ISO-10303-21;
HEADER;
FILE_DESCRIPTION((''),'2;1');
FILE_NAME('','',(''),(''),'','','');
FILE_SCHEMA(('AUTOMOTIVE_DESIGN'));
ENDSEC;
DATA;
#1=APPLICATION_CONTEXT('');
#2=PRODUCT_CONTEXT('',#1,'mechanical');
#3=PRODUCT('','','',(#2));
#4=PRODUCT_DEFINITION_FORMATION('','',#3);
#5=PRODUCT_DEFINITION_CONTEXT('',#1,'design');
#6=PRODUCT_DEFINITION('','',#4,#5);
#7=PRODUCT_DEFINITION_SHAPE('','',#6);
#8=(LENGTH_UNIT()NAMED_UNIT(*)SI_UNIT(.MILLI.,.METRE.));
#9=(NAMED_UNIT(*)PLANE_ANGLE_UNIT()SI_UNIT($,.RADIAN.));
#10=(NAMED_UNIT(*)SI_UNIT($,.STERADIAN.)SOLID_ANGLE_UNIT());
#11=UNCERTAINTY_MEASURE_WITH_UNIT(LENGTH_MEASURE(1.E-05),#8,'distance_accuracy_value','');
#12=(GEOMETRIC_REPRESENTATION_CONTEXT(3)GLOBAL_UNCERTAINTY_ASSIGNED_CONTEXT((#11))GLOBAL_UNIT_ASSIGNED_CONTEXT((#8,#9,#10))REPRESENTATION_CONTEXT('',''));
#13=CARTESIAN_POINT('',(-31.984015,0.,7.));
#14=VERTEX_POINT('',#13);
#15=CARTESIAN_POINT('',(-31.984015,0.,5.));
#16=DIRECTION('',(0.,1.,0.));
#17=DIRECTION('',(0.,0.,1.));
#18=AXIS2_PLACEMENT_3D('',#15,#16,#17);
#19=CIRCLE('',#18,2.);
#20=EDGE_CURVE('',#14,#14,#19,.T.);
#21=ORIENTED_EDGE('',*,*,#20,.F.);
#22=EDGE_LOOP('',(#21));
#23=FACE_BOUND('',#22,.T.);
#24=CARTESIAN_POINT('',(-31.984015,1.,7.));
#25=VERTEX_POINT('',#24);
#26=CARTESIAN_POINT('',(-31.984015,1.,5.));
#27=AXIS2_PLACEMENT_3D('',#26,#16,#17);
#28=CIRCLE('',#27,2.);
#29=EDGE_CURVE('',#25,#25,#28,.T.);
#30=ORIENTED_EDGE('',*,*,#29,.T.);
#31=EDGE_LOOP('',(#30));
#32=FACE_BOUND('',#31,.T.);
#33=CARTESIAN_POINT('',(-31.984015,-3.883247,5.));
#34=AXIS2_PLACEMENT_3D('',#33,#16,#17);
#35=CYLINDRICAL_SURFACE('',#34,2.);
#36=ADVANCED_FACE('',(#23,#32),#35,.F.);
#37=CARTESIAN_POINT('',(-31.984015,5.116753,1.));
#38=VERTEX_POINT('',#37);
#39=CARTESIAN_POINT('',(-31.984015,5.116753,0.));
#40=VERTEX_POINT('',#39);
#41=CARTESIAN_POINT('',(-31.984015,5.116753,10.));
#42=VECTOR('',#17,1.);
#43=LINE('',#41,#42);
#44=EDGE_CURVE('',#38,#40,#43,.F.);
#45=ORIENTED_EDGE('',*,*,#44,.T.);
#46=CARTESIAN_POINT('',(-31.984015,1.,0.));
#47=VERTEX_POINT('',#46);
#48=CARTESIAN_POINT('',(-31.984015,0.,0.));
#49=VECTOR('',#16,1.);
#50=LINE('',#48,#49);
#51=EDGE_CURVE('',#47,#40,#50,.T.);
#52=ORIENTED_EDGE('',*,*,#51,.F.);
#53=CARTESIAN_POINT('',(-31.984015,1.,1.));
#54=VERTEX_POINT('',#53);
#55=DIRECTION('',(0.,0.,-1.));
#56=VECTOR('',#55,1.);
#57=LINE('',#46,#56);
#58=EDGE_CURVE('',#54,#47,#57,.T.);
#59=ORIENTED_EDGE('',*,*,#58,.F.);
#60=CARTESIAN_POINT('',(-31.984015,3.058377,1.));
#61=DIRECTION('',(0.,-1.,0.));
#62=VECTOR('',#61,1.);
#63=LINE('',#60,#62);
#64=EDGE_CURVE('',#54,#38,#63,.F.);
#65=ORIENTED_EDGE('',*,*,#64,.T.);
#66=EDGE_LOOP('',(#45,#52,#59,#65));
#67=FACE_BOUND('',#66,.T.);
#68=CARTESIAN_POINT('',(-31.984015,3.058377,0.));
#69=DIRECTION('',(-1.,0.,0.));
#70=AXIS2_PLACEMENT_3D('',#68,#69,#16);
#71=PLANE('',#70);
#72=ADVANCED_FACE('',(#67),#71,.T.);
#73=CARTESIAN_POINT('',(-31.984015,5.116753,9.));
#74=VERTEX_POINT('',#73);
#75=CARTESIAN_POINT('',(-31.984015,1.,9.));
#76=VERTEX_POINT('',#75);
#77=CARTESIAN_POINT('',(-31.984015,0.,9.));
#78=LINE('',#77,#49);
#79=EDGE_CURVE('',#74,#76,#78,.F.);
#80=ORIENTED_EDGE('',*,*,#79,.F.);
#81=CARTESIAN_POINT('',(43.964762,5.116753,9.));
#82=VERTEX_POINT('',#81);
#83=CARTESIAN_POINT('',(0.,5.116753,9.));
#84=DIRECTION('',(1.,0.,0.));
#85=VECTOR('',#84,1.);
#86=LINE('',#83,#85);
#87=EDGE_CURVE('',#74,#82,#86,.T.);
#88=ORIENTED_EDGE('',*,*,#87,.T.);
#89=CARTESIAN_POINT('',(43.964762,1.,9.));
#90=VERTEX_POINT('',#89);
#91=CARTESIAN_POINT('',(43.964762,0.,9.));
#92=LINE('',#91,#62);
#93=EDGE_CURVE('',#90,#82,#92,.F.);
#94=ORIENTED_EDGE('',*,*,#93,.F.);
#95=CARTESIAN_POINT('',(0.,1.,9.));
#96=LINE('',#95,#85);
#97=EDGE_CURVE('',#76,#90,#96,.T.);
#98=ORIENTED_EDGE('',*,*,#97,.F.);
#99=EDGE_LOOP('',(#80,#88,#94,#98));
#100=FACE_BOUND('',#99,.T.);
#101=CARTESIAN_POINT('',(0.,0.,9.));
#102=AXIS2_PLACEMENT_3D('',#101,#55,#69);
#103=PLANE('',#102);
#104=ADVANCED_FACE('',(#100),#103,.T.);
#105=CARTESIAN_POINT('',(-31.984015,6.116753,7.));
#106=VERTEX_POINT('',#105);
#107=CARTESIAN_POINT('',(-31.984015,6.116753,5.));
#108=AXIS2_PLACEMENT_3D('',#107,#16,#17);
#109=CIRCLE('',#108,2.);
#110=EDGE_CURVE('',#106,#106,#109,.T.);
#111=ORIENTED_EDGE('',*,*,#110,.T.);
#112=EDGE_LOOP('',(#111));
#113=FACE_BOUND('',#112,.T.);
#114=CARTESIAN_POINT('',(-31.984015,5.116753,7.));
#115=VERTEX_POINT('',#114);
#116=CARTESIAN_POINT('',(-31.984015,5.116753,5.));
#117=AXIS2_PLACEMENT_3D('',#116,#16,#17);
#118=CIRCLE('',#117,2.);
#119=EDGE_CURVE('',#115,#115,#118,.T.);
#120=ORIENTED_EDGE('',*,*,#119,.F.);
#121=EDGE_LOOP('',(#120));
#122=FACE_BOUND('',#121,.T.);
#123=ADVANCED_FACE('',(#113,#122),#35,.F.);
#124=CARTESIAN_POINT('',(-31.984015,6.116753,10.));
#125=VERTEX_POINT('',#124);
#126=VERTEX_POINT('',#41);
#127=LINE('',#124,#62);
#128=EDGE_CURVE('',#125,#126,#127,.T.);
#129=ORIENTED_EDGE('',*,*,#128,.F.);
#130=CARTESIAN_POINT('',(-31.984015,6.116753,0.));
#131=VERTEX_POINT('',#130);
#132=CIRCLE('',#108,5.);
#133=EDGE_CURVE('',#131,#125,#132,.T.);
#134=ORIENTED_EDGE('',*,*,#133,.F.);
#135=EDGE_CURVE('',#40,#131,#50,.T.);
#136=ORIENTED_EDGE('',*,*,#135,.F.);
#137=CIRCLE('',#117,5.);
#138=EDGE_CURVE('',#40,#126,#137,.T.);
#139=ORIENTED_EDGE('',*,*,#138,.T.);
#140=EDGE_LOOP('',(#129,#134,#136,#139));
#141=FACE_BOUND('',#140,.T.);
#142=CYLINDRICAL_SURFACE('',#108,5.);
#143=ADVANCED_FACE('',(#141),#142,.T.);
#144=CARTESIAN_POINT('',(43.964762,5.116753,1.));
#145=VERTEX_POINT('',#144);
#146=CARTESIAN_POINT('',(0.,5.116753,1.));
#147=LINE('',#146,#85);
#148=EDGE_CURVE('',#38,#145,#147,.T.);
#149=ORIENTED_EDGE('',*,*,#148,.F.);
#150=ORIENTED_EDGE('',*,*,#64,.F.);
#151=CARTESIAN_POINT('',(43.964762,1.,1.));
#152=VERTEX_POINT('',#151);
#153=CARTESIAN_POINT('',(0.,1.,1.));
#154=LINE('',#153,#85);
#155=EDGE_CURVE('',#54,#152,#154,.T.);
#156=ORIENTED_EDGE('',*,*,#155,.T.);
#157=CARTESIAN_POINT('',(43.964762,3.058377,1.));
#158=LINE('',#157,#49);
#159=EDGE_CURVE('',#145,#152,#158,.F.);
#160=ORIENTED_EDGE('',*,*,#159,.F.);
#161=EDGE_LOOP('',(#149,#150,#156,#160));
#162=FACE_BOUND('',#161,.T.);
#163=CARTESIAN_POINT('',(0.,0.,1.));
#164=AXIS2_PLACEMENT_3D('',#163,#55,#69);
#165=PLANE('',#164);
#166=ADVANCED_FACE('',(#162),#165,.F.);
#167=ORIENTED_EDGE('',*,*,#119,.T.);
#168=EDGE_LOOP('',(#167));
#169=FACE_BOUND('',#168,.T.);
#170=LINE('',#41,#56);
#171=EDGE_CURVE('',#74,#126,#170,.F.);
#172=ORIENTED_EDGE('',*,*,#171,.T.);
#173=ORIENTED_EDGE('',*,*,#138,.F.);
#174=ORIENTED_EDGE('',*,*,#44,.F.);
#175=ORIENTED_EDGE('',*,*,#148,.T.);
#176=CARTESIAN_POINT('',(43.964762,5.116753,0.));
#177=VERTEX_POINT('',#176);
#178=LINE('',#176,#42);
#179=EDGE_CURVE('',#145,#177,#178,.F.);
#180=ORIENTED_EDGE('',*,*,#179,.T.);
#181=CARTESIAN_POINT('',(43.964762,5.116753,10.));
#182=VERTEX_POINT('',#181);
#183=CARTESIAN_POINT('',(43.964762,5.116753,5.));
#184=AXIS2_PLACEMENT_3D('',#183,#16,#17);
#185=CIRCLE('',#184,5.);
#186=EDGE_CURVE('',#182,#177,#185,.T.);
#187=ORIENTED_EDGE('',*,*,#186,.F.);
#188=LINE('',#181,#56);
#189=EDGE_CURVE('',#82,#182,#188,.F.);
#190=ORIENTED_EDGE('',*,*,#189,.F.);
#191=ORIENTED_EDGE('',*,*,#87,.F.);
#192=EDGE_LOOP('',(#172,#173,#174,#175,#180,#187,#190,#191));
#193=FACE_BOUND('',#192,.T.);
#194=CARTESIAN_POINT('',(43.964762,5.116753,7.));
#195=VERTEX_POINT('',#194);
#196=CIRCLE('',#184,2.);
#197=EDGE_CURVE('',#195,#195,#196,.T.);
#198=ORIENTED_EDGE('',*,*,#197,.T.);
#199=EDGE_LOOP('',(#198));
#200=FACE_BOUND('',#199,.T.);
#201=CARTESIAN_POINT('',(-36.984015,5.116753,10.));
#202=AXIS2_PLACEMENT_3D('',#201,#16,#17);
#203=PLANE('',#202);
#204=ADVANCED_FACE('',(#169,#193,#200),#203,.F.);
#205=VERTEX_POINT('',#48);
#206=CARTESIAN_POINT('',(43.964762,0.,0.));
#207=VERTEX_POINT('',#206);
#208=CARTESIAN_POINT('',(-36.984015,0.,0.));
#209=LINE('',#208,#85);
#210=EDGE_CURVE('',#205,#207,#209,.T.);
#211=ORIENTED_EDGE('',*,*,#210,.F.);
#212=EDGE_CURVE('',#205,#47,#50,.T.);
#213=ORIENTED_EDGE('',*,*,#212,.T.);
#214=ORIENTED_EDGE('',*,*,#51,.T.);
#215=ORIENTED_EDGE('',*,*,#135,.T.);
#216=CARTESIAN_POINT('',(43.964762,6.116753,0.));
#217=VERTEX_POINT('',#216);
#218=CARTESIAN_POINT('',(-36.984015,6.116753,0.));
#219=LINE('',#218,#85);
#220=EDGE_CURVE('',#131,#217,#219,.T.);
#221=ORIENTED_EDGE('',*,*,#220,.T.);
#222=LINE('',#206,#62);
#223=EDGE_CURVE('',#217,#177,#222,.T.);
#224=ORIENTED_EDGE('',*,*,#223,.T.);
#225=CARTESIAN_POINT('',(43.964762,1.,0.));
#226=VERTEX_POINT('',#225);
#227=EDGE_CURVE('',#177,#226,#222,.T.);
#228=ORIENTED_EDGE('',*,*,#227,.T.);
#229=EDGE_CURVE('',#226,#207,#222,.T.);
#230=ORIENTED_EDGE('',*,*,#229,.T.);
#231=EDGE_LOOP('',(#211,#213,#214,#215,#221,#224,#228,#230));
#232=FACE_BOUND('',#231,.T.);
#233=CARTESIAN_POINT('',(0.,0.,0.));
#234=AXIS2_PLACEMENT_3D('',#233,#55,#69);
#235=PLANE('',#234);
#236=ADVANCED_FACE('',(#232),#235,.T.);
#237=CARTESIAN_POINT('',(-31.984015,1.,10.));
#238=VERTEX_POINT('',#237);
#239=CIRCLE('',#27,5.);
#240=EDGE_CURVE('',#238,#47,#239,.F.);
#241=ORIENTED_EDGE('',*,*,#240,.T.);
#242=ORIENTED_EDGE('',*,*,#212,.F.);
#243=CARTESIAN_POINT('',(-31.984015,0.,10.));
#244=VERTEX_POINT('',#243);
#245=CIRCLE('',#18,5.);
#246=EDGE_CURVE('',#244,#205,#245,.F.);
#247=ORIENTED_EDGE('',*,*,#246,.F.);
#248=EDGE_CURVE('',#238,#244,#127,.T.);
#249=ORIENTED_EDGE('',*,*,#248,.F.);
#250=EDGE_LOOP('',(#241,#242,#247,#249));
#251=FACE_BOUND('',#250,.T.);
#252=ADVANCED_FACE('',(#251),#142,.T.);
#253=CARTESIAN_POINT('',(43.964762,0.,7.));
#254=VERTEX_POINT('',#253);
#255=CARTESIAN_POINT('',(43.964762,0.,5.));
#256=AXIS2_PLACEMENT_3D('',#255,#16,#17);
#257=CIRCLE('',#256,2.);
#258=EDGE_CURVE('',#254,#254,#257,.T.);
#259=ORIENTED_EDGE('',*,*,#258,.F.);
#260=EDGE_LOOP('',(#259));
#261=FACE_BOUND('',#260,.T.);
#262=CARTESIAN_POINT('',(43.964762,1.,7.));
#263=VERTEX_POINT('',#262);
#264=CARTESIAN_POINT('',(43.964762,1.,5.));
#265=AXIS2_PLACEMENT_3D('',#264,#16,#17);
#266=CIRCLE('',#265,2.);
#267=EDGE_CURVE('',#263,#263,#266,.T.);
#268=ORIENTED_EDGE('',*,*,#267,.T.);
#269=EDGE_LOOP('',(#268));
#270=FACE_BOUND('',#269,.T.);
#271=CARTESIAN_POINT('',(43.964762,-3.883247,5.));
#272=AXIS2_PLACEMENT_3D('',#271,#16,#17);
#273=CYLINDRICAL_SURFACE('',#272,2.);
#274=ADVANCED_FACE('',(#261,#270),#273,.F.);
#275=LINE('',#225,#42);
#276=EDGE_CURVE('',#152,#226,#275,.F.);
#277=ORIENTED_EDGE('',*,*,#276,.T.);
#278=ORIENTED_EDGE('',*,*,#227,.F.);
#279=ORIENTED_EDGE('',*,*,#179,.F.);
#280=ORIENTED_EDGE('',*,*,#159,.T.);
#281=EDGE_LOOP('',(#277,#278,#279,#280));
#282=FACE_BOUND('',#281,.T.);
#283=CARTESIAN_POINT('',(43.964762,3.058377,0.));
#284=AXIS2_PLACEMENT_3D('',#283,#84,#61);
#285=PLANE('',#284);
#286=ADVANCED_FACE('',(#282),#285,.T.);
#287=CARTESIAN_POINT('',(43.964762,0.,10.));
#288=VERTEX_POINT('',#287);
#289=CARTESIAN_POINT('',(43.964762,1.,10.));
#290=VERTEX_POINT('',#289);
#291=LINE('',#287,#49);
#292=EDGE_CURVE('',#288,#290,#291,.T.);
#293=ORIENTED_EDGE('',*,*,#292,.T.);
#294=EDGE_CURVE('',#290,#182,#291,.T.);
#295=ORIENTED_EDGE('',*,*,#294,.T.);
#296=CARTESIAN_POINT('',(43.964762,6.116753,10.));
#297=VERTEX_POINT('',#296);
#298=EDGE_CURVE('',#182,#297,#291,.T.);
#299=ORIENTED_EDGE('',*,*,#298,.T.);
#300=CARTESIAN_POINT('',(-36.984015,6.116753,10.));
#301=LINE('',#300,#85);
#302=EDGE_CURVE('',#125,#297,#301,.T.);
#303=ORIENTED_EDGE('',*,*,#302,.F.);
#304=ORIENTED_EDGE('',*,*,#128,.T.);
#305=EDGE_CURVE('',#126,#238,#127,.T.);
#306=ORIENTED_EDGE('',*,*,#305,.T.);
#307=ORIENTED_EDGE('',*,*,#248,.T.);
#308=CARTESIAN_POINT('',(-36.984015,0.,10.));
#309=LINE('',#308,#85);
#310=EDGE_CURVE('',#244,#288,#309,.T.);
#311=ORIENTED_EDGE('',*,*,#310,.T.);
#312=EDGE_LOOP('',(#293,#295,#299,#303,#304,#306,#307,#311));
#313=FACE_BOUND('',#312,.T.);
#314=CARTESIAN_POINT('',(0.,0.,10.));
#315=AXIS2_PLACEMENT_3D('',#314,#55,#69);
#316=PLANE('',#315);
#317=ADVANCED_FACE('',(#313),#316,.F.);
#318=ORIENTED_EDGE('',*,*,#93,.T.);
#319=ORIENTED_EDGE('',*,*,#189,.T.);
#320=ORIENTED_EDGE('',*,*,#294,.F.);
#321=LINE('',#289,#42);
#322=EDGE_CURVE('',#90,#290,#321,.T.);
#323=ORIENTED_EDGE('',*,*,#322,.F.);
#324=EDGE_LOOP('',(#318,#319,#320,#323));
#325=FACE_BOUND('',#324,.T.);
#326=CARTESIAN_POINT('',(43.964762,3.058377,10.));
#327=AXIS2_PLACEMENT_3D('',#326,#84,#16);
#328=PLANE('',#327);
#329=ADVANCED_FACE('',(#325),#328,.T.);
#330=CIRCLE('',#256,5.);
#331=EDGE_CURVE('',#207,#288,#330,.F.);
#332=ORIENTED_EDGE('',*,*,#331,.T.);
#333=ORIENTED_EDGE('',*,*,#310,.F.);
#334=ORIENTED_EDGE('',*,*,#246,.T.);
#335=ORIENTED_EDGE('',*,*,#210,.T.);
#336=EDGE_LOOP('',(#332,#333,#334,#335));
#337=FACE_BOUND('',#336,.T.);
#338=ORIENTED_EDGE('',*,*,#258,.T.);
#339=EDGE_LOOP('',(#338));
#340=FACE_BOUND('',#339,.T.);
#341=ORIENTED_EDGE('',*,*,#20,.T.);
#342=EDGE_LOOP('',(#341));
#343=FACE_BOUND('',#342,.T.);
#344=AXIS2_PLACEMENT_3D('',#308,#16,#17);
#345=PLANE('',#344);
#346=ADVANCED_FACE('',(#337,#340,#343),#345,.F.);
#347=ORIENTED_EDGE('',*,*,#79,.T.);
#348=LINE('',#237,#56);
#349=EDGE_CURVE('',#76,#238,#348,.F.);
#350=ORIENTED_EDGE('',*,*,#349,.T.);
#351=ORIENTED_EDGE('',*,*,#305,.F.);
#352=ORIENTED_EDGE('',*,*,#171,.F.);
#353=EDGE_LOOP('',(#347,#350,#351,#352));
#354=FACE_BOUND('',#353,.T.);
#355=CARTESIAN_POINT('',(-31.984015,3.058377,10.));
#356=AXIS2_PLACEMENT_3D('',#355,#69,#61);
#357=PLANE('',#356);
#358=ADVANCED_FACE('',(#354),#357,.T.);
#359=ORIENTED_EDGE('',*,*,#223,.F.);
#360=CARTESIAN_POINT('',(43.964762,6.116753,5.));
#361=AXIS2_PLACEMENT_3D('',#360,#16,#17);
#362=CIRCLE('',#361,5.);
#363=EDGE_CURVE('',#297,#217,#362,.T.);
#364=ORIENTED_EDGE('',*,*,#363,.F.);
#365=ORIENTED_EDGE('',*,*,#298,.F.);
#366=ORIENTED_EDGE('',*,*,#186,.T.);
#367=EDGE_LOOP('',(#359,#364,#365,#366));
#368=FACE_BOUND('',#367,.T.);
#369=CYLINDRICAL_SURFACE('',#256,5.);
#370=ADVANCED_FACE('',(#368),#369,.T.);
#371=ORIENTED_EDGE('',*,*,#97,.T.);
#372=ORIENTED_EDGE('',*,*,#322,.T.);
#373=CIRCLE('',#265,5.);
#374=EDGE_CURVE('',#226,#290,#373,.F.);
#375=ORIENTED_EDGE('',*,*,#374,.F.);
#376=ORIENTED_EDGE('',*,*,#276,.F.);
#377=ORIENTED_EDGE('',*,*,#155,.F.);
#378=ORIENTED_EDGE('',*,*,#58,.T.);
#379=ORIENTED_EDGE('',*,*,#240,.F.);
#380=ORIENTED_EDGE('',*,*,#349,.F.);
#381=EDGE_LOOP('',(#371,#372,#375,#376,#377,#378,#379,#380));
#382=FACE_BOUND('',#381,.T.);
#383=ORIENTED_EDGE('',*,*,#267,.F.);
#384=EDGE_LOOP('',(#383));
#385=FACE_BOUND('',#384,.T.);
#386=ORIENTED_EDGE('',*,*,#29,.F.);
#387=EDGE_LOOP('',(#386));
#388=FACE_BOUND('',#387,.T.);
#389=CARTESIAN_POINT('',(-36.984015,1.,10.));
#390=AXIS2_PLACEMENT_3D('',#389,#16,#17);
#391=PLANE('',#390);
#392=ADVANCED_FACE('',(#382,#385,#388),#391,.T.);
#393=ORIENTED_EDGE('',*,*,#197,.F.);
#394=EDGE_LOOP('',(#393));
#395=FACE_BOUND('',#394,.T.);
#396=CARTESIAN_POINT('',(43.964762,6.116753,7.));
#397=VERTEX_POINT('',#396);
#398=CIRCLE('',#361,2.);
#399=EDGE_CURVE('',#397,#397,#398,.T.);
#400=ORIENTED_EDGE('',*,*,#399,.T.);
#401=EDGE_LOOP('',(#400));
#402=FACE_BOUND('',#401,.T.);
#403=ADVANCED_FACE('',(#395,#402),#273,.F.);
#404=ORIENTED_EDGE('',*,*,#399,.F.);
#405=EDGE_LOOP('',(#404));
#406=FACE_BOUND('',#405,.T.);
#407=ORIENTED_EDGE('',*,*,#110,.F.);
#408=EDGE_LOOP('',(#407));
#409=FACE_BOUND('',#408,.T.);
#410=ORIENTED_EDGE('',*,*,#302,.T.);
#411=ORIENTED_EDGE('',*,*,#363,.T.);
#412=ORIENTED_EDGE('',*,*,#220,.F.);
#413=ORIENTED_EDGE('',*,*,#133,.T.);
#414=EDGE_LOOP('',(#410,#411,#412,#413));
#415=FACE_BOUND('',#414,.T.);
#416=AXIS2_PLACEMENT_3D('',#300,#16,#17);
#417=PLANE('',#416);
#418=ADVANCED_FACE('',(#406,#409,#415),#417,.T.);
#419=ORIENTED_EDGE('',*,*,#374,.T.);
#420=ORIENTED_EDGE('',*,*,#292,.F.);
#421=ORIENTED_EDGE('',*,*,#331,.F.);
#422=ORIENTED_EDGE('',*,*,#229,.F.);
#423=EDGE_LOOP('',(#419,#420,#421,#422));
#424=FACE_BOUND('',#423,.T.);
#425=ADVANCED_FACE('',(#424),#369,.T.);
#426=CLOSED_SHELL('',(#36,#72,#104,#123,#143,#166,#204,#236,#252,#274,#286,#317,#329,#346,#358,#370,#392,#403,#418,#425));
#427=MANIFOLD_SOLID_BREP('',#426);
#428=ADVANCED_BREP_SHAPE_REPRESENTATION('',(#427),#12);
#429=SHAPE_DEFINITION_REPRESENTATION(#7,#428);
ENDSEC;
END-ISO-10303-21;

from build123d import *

# Parameters (mm, degrees)
SKETCH1_W           = 85.948776221
SKETCH1_H           = 6.116753323
BOSS_EXTRUDE3_DEPTH = 10
FILLET1_RADIUS      = 5
FILLET1_LENGTH      = 6.116753323
FILLET2_RADIUS      = 5
FILLET2_LENGTH      = 6.116753323
SKETCH2_R           = 2
CUT_EXTRUDE1_DEPTH  = 10
SHELL4_START        = -36.984014516
SHELL4_OUTLINE_W    = 4.116753323
SHELL4_OUTLINE_H    = 8
SHELL4_DEPTH        = 85.948776221
SHELL4_START_2      = -36.983829274
SHELL4_2_OUTLINE_W  = 4.116753323
SHELL4_2_OUTLINE_H  = 2
SHELL4_2_DEPTH      = 4.999814758
SHELL4_START_3      = 43.964761705
SHELL4_3_OUTLINE_W  = 4.116753323
SHELL4_3_OUTLINE_H  = 2
SHELL4_3_DEPTH      = 4.999814758


# Read off the part's stored shape, not the designer's step: Shell4
with BuildPart() as part:
    # Sketch1 → Boss-Extrude3 (new body)
    with BuildSketch(Plane.XY):
        with Locations((5.990373594, 3.058376662)):
            Rectangle(SKETCH1_W, SKETCH1_H)
    extrude(amount=BOSS_EXTRUDE3_DEPTH)

    # Fillet1: full round fillet: the end face becomes a half cylinder, R = half its width
    fillet1_face = Plane((48.964761705, 3.058376662, 5), x_dir=(0, -1, 0), z_dir=(1, 0, 0))  # on the end face: x along it, z out of the body
    fillet1_slab = fillet1_face.offset(-FILLET1_RADIUS / 2) * Box(FILLET1_LENGTH, 2 * FILLET1_RADIUS, FILLET1_RADIUS, mode=Mode.PRIVATE)  # the body's end, R deep
    fillet1_round = Plane((43.964761705, 3.058376662, 5), x_dir=(1, 0, 0), z_dir=(0, -1, 0)) * Cylinder(FILLET1_RADIUS, FILLET1_LENGTH, mode=Mode.PRIVATE)  # its axis R under the face
    add(fillet1_slab - fillet1_round, mode=Mode.SUBTRACT)

    # Fillet2: full round fillet: the end face becomes a half cylinder, R = half its width
    fillet2_face = Plane((-36.984014516, 3.058376662, 5), x_dir=(0, 1, 0), z_dir=(-1, 0, 0))  # on the end face: x along it, z out of the body
    fillet2_slab = fillet2_face.offset(-FILLET2_RADIUS / 2) * Box(FILLET2_LENGTH, 2 * FILLET2_RADIUS, FILLET2_RADIUS, mode=Mode.PRIVATE)  # the body's end, R deep
    fillet2_round = Plane((-31.984014516, 3.058376662, 5), x_dir=(-1, 0, 0), z_dir=(0, 1, 0)) * Cylinder(FILLET2_RADIUS, FILLET2_LENGTH, mode=Mode.PRIVATE)  # its axis R under the face
    add(fillet2_slab - fillet2_round, mode=Mode.SUBTRACT)

    # Sketch2 → Cut-Extrude1 (cut)
    with BuildSketch(Plane(origin=(0, 6.116753323, 0), x_dir=(1, 0, 0), z_dir=(0, 1, 0))):
        with Locations(Location((43.964761705, -5, 0), (0, 0, 270))):
            Circle(SKETCH2_R)
        with Locations(Location((-31.984014516, -5, 0), (0, 0, 270))):
            Circle(SKETCH2_R)
    extrude(amount=-CUT_EXTRUDE1_DEPTH, mode=Mode.SUBTRACT)

    # Shell4 outline → Shell4 (cut)
    with BuildSketch(Plane.YZ.offset(SHELL4_START)):
        with Locations((3.058376662, 5)):
            Rectangle(SHELL4_OUTLINE_W, SHELL4_OUTLINE_H)
    extrude(amount=SHELL4_DEPTH, mode=Mode.SUBTRACT)

    # Shell4 2 outline → Shell4 2 (cut)
    with BuildSketch(Plane.YZ.offset(SHELL4_START_2)):
        with Locations((3.058376662, 0)):
            Rectangle(SHELL4_2_OUTLINE_W, SHELL4_2_OUTLINE_H)
        with Locations((3.058376662, 10)):
            Rectangle(SHELL4_2_OUTLINE_W, SHELL4_2_OUTLINE_H)
    extrude(amount=SHELL4_2_DEPTH, mode=Mode.SUBTRACT)

    # Shell4 3 outline → Shell4 3 (cut)
    with BuildSketch(Plane.YZ.offset(SHELL4_START_3)):
        with Locations((3.058376662, 0)):
            Rectangle(SHELL4_3_OUTLINE_W, SHELL4_3_OUTLINE_H)
        with Locations((3.058376662, 10)):
            Rectangle(SHELL4_3_OUTLINE_W, SHELL4_3_OUTLINE_H)
    extrude(amount=SHELL4_3_DEPTH, mode=Mode.SUBTRACT)


solid = part.part
